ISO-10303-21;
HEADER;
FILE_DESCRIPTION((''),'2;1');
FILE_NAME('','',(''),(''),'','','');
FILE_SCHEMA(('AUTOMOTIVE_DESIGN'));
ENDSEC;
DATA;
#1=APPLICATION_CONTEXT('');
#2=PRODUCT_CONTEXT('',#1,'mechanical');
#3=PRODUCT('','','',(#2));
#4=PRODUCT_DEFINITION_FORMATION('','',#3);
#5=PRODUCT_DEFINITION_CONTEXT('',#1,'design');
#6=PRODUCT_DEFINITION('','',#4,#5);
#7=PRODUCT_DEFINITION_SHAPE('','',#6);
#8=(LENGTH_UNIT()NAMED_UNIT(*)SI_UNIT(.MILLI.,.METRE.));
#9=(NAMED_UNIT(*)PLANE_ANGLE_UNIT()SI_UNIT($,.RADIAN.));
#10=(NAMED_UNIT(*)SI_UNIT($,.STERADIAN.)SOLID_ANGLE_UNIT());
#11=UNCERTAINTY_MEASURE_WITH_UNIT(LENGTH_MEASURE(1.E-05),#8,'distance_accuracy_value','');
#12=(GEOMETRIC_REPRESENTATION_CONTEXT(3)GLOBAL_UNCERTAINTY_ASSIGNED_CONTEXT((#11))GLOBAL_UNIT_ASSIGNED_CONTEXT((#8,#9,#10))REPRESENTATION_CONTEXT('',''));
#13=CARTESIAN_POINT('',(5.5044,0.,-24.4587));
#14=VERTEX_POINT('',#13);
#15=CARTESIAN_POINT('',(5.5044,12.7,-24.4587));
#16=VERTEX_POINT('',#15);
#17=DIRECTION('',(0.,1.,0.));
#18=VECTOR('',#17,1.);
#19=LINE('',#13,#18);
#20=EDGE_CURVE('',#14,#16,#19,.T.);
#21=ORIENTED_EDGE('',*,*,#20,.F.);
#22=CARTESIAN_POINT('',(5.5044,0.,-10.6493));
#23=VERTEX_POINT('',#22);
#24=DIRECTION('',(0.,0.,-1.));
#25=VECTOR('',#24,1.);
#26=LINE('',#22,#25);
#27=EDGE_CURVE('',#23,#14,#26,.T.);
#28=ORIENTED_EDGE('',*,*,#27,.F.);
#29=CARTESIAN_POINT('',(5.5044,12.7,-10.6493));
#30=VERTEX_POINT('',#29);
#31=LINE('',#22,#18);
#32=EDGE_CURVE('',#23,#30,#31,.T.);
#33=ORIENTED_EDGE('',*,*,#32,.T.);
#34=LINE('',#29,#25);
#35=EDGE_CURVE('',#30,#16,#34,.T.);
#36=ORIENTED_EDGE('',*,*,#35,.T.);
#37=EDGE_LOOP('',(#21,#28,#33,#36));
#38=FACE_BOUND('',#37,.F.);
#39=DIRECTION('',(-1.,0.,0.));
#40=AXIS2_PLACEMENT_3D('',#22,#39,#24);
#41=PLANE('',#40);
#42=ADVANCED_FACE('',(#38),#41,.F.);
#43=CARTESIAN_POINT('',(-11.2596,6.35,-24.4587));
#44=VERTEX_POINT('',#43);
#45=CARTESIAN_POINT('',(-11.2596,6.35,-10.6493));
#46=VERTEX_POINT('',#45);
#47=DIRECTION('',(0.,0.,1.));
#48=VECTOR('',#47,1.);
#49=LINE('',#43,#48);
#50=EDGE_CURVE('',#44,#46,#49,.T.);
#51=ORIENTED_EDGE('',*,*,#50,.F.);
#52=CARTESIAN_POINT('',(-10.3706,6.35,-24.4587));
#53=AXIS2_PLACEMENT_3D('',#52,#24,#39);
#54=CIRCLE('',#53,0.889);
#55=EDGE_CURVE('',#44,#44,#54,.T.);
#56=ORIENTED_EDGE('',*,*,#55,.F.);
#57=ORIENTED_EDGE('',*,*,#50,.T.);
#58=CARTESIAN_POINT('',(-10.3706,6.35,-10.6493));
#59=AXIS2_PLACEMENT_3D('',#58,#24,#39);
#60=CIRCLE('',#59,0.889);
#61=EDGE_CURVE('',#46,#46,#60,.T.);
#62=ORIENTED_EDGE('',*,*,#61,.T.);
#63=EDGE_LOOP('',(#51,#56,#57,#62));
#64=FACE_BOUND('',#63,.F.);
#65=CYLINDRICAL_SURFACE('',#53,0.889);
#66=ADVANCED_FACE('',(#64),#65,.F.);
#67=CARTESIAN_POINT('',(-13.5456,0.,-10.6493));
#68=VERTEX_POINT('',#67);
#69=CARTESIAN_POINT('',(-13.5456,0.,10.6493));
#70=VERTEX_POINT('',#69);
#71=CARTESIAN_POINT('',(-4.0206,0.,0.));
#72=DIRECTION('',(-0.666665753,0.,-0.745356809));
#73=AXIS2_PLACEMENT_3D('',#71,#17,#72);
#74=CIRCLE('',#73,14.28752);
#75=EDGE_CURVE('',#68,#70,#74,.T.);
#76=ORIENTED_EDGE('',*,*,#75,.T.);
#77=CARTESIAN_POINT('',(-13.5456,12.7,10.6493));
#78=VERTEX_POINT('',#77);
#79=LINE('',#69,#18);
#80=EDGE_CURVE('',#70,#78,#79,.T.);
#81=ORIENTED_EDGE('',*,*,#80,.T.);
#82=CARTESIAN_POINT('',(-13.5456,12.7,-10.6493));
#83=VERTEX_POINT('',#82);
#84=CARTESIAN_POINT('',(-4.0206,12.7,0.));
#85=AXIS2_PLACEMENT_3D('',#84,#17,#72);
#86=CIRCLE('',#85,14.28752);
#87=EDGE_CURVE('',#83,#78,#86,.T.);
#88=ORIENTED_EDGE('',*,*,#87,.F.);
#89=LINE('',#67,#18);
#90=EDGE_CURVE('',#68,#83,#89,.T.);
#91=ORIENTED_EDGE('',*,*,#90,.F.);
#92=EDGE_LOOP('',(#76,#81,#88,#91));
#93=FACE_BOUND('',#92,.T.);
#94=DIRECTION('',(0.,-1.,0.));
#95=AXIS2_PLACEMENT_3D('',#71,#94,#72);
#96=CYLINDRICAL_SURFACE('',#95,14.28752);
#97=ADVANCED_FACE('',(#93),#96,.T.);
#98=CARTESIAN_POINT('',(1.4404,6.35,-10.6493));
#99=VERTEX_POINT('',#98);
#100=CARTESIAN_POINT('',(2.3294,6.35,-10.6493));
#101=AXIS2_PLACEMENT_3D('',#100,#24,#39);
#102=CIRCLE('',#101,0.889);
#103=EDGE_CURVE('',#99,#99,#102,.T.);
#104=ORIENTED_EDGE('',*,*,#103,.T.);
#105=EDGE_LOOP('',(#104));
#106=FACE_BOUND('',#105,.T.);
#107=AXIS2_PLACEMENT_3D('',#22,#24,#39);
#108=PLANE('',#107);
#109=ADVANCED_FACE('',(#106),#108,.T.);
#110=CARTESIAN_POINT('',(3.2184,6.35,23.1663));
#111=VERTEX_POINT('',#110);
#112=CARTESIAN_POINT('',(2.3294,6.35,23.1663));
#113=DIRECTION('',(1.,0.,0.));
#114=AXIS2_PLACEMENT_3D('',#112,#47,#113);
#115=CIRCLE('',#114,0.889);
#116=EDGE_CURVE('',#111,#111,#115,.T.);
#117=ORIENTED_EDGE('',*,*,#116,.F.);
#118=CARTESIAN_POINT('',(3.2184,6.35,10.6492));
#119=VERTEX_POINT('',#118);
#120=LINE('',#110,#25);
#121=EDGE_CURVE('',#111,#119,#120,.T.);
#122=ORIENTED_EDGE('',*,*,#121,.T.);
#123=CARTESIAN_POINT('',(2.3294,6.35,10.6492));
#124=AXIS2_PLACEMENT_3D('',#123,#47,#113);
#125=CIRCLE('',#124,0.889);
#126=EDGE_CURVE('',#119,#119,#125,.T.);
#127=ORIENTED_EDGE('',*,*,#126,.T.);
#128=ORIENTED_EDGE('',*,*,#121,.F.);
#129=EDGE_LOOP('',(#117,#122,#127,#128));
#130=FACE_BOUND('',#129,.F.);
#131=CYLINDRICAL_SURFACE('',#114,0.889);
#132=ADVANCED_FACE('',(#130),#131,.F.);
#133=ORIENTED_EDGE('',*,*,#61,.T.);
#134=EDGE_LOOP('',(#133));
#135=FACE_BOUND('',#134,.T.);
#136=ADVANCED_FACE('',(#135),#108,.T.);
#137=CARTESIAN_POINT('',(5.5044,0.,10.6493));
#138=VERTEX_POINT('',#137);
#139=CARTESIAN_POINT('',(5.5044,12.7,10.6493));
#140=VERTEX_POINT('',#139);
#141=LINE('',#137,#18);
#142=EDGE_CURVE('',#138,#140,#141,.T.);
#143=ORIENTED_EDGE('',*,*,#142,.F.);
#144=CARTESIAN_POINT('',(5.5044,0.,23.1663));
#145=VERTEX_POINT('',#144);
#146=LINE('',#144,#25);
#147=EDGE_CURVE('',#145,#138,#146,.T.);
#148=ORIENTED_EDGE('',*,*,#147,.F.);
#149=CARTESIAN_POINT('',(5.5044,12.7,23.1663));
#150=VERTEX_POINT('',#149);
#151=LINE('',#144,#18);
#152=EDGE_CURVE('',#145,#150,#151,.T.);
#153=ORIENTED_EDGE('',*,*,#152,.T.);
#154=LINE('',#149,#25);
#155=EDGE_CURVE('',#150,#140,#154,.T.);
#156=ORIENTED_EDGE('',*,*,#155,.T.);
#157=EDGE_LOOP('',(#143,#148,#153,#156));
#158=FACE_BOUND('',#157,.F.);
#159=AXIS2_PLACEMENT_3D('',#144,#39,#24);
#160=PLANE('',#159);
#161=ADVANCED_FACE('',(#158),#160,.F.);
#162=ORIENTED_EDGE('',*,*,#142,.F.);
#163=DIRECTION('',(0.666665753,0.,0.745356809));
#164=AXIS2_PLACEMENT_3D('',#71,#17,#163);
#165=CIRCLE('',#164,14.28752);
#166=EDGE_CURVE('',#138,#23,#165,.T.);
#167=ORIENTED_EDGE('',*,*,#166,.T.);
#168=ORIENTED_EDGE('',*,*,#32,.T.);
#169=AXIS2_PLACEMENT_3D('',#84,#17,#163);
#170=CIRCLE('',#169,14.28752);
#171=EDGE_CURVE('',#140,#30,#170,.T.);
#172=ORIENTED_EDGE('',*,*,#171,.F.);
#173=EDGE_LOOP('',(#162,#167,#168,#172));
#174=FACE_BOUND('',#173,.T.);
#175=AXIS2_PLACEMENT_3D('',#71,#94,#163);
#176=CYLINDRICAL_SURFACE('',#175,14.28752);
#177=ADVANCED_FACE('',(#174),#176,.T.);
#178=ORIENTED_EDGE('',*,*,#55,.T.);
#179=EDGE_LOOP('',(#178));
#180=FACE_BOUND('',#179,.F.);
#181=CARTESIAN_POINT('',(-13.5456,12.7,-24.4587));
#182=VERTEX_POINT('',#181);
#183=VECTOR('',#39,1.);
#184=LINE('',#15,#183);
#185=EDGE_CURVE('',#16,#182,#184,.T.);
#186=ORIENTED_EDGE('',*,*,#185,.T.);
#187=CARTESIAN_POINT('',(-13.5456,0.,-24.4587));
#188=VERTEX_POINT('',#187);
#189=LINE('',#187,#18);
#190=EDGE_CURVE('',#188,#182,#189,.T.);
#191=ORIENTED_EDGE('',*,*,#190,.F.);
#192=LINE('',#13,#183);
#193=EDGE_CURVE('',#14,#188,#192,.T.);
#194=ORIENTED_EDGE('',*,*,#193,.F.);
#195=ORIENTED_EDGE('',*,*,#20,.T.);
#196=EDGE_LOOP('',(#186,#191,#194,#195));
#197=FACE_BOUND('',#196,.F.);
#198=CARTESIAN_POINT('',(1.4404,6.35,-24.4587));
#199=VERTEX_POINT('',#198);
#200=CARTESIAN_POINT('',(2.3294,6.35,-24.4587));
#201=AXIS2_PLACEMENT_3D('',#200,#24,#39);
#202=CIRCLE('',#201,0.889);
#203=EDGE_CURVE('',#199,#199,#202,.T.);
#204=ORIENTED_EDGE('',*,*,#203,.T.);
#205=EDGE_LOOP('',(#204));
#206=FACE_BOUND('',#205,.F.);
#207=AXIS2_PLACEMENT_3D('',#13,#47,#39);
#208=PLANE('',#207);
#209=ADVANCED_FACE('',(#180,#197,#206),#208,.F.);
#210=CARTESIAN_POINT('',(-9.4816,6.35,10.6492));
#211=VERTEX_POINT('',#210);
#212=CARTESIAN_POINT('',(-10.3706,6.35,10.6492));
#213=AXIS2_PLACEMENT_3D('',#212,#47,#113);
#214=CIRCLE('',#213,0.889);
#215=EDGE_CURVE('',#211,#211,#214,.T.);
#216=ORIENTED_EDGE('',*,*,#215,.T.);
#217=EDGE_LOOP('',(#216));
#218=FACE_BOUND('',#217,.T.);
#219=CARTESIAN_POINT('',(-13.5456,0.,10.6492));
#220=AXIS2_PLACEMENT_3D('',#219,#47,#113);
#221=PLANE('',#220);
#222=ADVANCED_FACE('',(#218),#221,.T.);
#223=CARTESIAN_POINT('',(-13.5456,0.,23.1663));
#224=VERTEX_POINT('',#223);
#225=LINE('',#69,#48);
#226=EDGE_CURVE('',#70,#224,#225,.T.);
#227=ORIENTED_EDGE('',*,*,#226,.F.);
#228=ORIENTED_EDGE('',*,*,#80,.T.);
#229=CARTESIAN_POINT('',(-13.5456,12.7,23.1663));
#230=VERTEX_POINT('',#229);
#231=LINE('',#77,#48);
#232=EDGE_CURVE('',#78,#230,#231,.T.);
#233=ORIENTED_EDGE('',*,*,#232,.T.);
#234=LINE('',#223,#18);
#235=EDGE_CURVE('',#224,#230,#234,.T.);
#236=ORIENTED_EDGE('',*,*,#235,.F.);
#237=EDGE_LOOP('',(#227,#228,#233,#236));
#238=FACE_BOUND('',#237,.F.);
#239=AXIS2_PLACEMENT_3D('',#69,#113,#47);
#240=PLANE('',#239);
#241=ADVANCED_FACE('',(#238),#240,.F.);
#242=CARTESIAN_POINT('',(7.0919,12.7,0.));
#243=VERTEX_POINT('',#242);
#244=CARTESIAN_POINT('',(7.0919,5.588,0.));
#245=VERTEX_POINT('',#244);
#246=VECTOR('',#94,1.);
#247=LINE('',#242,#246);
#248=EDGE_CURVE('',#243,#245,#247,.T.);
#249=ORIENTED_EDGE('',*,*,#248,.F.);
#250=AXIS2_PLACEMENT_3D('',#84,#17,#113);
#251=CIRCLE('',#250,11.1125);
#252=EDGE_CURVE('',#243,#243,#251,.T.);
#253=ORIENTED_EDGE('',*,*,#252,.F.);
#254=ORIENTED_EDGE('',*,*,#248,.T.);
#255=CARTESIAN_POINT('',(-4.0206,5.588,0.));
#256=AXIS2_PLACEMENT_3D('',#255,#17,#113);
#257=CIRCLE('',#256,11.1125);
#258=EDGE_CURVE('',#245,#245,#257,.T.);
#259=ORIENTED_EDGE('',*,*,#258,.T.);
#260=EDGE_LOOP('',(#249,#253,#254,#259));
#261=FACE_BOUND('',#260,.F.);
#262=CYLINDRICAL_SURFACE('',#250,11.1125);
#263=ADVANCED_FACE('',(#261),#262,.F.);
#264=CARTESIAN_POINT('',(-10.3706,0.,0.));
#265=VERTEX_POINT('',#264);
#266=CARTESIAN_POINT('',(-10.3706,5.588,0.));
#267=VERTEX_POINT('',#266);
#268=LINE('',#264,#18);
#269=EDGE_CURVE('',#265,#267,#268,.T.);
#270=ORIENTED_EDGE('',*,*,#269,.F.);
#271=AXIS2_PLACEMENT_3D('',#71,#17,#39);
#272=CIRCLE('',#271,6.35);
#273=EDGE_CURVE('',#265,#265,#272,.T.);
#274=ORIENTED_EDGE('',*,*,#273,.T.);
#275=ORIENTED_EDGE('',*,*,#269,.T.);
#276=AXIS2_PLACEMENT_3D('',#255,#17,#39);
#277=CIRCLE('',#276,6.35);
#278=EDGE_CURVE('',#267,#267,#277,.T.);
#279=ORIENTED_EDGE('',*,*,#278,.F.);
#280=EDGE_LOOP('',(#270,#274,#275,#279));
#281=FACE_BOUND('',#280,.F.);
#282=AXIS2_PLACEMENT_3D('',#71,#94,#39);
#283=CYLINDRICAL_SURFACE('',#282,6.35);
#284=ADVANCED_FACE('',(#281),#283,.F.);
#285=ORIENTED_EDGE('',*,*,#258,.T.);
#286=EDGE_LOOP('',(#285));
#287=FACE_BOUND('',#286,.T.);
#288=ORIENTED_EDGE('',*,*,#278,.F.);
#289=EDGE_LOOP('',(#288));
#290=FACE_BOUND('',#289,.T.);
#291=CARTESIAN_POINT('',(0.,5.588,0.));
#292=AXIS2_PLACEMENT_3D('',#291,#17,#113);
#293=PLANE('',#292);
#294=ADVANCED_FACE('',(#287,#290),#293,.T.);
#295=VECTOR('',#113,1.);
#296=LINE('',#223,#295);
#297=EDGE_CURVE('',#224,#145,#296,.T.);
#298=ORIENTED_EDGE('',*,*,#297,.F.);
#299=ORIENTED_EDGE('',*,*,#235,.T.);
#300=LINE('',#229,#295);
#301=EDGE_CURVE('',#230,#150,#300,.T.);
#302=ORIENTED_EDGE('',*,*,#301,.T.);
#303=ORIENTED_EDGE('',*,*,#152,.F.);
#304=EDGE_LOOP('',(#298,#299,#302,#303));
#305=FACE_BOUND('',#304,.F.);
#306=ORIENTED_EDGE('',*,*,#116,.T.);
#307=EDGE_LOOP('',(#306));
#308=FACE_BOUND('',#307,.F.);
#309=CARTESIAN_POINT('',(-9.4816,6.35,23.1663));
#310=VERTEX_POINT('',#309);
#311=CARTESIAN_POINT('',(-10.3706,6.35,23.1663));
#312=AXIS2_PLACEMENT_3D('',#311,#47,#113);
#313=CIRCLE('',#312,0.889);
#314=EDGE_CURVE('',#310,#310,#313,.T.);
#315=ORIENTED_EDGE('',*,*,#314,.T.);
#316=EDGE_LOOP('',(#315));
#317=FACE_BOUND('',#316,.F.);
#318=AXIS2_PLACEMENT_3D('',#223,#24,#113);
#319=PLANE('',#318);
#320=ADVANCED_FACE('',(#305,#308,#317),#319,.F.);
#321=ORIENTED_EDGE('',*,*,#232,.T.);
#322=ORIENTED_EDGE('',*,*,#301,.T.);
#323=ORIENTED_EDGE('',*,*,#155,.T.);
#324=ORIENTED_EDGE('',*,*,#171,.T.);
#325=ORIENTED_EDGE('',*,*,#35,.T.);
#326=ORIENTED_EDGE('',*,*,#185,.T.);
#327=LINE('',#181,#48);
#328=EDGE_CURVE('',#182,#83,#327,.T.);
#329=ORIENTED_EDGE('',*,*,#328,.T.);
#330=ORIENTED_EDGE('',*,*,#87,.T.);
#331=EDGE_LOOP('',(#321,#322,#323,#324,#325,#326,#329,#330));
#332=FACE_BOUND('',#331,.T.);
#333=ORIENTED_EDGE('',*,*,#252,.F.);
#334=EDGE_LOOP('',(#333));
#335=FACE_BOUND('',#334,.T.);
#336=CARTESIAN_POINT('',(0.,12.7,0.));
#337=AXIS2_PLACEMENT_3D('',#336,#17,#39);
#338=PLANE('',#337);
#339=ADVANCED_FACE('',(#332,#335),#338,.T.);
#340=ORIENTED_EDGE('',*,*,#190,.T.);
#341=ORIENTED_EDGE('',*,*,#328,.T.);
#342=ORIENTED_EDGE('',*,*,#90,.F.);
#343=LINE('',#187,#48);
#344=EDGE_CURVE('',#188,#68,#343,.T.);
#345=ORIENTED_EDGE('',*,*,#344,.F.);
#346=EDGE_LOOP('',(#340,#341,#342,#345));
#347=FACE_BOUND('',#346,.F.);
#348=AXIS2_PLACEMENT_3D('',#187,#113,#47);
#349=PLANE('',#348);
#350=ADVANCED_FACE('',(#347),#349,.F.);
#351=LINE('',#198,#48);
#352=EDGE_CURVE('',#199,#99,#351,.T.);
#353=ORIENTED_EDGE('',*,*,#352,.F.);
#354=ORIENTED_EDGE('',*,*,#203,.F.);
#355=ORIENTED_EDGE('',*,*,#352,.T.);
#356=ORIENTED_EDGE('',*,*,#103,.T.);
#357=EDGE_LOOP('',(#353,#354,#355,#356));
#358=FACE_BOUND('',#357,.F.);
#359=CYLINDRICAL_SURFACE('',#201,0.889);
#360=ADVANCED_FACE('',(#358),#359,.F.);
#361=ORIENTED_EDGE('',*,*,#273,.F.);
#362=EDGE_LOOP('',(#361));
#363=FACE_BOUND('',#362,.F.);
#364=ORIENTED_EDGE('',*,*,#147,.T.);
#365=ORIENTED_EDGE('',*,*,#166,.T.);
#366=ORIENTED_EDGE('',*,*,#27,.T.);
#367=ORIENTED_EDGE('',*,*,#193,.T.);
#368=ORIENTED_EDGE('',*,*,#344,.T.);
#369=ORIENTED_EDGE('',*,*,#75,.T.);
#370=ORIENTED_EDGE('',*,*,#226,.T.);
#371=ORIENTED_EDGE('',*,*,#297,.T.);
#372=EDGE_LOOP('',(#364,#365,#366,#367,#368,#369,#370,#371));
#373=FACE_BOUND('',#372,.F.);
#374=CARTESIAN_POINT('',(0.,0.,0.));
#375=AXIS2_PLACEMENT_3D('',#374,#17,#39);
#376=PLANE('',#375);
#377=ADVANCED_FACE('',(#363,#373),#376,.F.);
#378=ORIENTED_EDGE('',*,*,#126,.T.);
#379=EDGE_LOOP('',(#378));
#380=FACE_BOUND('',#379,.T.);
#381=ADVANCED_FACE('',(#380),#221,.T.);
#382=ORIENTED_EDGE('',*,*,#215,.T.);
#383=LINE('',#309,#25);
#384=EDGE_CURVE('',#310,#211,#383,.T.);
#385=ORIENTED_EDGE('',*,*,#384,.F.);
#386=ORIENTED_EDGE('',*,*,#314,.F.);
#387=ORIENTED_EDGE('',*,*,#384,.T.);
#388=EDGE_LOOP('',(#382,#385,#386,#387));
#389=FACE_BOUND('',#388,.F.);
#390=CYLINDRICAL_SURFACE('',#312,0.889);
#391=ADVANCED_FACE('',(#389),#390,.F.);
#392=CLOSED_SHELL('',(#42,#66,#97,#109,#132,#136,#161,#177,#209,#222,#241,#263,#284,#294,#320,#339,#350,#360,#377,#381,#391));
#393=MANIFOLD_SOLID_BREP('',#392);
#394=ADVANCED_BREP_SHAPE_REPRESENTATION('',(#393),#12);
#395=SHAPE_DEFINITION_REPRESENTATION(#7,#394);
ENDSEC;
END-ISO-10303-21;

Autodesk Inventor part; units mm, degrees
ref_plane "YZ Plane" through (0, 0, 0) normal (1, 0, 0) x (0, 1, 0)
ref_plane "XZ Plane" through (0, 0, 0) normal (0, 1, 0) x (-1, 0, 0)
ref_plane "XY Plane" through (0, 0, 0) normal (0, 0, 1) x (1, 0, 0)
sketch "Sketch1" plane through (0, 0, 0) normal (0, 1, 0) x (-1, 0, 0)
  line L0 (13.5456, 23.1663) -> (-5.5044, 23.1663)
  line L1 (-5.5044, -24.4587) -> (13.5456, -24.4587)
  line L2 (-5.5044, 23.1663) -> (-5.5044, 10.6493)
  line L3 (-5.5044, -10.6493) -> (-5.5044, -24.4587)
  line L4 (13.5456, -24.4587) -> (13.5456, -10.6493)
  line L5 (13.5456, 10.6493) -> (13.5456, 23.1663)
  circle A0 centre (4.0206, 0) radius 6.35
  arc A1 (13.5456, -10.6493) -> (13.5456, 10.6493) centre (4.0206, 0) ccw
  arc A2 (-5.5044, 10.6493) -> (-5.5044, -10.6493) centre (4.0206, 0) ccw
  point P0 (0, 0)
  dimension "d0" = 47.625
  dimension "d1" = 19.05
  dimension "d3" = 12.7
extrude "Extrusion1" add sketch "Sketch1" along normal blind 12.7
sketch "Sketch2" plane through (0, 12.7, 0) normal (0, 1, 0) x (1, 0, 0)
  circle A0 centre (-4.0206, 0) radius 6.35 projected
  circle A1 centre (-4.0206, 0) radius 11.1125
  point P0 (0, 0)
  dimension "d7" = 22.225
extrude "Extrusion2" cut sketch "Sketch2" against normal blind 7.112
sketch "Sketch3" plane through (-13.5456, 0, 23.1663) normal (0, 0, 1) x (1, 0, 0)
  line L0 (0, 0) -> (0, 12.7) projected
  line L1 (19.05, 0) -> (19.05, 12.7) projected
  circle A0 centre (3.175, 6.35) radius 0.889
  circle A1 centre (15.875, 6.35) radius 0.889
  point P0 (13.5456, 0)
  dimension "d10" = 3.175
  dimension "d11" = 3.175
  dimension "d12" = 1.778
  dimension "d13" = 1.778
extrude "Extrusion3" cut sketch "Sketch3" against normal up to surface (12.5171 mm away)
sketch "Sketch4" plane through (5.5044, 0, -24.4587) normal (0, 0, -1) x (-1, 0, 0)
  circle A0 centre (3.175, 6.35) radius 0.889 projected
  circle A1 centre (15.875, 6.35) radius 0.889 projected
  point P0 (5.5044, 0)
extrude "Extrusion4" cut sketch "Sketch4" against normal up to surface (13.8094 mm away)
properties part number "top_anchor"
